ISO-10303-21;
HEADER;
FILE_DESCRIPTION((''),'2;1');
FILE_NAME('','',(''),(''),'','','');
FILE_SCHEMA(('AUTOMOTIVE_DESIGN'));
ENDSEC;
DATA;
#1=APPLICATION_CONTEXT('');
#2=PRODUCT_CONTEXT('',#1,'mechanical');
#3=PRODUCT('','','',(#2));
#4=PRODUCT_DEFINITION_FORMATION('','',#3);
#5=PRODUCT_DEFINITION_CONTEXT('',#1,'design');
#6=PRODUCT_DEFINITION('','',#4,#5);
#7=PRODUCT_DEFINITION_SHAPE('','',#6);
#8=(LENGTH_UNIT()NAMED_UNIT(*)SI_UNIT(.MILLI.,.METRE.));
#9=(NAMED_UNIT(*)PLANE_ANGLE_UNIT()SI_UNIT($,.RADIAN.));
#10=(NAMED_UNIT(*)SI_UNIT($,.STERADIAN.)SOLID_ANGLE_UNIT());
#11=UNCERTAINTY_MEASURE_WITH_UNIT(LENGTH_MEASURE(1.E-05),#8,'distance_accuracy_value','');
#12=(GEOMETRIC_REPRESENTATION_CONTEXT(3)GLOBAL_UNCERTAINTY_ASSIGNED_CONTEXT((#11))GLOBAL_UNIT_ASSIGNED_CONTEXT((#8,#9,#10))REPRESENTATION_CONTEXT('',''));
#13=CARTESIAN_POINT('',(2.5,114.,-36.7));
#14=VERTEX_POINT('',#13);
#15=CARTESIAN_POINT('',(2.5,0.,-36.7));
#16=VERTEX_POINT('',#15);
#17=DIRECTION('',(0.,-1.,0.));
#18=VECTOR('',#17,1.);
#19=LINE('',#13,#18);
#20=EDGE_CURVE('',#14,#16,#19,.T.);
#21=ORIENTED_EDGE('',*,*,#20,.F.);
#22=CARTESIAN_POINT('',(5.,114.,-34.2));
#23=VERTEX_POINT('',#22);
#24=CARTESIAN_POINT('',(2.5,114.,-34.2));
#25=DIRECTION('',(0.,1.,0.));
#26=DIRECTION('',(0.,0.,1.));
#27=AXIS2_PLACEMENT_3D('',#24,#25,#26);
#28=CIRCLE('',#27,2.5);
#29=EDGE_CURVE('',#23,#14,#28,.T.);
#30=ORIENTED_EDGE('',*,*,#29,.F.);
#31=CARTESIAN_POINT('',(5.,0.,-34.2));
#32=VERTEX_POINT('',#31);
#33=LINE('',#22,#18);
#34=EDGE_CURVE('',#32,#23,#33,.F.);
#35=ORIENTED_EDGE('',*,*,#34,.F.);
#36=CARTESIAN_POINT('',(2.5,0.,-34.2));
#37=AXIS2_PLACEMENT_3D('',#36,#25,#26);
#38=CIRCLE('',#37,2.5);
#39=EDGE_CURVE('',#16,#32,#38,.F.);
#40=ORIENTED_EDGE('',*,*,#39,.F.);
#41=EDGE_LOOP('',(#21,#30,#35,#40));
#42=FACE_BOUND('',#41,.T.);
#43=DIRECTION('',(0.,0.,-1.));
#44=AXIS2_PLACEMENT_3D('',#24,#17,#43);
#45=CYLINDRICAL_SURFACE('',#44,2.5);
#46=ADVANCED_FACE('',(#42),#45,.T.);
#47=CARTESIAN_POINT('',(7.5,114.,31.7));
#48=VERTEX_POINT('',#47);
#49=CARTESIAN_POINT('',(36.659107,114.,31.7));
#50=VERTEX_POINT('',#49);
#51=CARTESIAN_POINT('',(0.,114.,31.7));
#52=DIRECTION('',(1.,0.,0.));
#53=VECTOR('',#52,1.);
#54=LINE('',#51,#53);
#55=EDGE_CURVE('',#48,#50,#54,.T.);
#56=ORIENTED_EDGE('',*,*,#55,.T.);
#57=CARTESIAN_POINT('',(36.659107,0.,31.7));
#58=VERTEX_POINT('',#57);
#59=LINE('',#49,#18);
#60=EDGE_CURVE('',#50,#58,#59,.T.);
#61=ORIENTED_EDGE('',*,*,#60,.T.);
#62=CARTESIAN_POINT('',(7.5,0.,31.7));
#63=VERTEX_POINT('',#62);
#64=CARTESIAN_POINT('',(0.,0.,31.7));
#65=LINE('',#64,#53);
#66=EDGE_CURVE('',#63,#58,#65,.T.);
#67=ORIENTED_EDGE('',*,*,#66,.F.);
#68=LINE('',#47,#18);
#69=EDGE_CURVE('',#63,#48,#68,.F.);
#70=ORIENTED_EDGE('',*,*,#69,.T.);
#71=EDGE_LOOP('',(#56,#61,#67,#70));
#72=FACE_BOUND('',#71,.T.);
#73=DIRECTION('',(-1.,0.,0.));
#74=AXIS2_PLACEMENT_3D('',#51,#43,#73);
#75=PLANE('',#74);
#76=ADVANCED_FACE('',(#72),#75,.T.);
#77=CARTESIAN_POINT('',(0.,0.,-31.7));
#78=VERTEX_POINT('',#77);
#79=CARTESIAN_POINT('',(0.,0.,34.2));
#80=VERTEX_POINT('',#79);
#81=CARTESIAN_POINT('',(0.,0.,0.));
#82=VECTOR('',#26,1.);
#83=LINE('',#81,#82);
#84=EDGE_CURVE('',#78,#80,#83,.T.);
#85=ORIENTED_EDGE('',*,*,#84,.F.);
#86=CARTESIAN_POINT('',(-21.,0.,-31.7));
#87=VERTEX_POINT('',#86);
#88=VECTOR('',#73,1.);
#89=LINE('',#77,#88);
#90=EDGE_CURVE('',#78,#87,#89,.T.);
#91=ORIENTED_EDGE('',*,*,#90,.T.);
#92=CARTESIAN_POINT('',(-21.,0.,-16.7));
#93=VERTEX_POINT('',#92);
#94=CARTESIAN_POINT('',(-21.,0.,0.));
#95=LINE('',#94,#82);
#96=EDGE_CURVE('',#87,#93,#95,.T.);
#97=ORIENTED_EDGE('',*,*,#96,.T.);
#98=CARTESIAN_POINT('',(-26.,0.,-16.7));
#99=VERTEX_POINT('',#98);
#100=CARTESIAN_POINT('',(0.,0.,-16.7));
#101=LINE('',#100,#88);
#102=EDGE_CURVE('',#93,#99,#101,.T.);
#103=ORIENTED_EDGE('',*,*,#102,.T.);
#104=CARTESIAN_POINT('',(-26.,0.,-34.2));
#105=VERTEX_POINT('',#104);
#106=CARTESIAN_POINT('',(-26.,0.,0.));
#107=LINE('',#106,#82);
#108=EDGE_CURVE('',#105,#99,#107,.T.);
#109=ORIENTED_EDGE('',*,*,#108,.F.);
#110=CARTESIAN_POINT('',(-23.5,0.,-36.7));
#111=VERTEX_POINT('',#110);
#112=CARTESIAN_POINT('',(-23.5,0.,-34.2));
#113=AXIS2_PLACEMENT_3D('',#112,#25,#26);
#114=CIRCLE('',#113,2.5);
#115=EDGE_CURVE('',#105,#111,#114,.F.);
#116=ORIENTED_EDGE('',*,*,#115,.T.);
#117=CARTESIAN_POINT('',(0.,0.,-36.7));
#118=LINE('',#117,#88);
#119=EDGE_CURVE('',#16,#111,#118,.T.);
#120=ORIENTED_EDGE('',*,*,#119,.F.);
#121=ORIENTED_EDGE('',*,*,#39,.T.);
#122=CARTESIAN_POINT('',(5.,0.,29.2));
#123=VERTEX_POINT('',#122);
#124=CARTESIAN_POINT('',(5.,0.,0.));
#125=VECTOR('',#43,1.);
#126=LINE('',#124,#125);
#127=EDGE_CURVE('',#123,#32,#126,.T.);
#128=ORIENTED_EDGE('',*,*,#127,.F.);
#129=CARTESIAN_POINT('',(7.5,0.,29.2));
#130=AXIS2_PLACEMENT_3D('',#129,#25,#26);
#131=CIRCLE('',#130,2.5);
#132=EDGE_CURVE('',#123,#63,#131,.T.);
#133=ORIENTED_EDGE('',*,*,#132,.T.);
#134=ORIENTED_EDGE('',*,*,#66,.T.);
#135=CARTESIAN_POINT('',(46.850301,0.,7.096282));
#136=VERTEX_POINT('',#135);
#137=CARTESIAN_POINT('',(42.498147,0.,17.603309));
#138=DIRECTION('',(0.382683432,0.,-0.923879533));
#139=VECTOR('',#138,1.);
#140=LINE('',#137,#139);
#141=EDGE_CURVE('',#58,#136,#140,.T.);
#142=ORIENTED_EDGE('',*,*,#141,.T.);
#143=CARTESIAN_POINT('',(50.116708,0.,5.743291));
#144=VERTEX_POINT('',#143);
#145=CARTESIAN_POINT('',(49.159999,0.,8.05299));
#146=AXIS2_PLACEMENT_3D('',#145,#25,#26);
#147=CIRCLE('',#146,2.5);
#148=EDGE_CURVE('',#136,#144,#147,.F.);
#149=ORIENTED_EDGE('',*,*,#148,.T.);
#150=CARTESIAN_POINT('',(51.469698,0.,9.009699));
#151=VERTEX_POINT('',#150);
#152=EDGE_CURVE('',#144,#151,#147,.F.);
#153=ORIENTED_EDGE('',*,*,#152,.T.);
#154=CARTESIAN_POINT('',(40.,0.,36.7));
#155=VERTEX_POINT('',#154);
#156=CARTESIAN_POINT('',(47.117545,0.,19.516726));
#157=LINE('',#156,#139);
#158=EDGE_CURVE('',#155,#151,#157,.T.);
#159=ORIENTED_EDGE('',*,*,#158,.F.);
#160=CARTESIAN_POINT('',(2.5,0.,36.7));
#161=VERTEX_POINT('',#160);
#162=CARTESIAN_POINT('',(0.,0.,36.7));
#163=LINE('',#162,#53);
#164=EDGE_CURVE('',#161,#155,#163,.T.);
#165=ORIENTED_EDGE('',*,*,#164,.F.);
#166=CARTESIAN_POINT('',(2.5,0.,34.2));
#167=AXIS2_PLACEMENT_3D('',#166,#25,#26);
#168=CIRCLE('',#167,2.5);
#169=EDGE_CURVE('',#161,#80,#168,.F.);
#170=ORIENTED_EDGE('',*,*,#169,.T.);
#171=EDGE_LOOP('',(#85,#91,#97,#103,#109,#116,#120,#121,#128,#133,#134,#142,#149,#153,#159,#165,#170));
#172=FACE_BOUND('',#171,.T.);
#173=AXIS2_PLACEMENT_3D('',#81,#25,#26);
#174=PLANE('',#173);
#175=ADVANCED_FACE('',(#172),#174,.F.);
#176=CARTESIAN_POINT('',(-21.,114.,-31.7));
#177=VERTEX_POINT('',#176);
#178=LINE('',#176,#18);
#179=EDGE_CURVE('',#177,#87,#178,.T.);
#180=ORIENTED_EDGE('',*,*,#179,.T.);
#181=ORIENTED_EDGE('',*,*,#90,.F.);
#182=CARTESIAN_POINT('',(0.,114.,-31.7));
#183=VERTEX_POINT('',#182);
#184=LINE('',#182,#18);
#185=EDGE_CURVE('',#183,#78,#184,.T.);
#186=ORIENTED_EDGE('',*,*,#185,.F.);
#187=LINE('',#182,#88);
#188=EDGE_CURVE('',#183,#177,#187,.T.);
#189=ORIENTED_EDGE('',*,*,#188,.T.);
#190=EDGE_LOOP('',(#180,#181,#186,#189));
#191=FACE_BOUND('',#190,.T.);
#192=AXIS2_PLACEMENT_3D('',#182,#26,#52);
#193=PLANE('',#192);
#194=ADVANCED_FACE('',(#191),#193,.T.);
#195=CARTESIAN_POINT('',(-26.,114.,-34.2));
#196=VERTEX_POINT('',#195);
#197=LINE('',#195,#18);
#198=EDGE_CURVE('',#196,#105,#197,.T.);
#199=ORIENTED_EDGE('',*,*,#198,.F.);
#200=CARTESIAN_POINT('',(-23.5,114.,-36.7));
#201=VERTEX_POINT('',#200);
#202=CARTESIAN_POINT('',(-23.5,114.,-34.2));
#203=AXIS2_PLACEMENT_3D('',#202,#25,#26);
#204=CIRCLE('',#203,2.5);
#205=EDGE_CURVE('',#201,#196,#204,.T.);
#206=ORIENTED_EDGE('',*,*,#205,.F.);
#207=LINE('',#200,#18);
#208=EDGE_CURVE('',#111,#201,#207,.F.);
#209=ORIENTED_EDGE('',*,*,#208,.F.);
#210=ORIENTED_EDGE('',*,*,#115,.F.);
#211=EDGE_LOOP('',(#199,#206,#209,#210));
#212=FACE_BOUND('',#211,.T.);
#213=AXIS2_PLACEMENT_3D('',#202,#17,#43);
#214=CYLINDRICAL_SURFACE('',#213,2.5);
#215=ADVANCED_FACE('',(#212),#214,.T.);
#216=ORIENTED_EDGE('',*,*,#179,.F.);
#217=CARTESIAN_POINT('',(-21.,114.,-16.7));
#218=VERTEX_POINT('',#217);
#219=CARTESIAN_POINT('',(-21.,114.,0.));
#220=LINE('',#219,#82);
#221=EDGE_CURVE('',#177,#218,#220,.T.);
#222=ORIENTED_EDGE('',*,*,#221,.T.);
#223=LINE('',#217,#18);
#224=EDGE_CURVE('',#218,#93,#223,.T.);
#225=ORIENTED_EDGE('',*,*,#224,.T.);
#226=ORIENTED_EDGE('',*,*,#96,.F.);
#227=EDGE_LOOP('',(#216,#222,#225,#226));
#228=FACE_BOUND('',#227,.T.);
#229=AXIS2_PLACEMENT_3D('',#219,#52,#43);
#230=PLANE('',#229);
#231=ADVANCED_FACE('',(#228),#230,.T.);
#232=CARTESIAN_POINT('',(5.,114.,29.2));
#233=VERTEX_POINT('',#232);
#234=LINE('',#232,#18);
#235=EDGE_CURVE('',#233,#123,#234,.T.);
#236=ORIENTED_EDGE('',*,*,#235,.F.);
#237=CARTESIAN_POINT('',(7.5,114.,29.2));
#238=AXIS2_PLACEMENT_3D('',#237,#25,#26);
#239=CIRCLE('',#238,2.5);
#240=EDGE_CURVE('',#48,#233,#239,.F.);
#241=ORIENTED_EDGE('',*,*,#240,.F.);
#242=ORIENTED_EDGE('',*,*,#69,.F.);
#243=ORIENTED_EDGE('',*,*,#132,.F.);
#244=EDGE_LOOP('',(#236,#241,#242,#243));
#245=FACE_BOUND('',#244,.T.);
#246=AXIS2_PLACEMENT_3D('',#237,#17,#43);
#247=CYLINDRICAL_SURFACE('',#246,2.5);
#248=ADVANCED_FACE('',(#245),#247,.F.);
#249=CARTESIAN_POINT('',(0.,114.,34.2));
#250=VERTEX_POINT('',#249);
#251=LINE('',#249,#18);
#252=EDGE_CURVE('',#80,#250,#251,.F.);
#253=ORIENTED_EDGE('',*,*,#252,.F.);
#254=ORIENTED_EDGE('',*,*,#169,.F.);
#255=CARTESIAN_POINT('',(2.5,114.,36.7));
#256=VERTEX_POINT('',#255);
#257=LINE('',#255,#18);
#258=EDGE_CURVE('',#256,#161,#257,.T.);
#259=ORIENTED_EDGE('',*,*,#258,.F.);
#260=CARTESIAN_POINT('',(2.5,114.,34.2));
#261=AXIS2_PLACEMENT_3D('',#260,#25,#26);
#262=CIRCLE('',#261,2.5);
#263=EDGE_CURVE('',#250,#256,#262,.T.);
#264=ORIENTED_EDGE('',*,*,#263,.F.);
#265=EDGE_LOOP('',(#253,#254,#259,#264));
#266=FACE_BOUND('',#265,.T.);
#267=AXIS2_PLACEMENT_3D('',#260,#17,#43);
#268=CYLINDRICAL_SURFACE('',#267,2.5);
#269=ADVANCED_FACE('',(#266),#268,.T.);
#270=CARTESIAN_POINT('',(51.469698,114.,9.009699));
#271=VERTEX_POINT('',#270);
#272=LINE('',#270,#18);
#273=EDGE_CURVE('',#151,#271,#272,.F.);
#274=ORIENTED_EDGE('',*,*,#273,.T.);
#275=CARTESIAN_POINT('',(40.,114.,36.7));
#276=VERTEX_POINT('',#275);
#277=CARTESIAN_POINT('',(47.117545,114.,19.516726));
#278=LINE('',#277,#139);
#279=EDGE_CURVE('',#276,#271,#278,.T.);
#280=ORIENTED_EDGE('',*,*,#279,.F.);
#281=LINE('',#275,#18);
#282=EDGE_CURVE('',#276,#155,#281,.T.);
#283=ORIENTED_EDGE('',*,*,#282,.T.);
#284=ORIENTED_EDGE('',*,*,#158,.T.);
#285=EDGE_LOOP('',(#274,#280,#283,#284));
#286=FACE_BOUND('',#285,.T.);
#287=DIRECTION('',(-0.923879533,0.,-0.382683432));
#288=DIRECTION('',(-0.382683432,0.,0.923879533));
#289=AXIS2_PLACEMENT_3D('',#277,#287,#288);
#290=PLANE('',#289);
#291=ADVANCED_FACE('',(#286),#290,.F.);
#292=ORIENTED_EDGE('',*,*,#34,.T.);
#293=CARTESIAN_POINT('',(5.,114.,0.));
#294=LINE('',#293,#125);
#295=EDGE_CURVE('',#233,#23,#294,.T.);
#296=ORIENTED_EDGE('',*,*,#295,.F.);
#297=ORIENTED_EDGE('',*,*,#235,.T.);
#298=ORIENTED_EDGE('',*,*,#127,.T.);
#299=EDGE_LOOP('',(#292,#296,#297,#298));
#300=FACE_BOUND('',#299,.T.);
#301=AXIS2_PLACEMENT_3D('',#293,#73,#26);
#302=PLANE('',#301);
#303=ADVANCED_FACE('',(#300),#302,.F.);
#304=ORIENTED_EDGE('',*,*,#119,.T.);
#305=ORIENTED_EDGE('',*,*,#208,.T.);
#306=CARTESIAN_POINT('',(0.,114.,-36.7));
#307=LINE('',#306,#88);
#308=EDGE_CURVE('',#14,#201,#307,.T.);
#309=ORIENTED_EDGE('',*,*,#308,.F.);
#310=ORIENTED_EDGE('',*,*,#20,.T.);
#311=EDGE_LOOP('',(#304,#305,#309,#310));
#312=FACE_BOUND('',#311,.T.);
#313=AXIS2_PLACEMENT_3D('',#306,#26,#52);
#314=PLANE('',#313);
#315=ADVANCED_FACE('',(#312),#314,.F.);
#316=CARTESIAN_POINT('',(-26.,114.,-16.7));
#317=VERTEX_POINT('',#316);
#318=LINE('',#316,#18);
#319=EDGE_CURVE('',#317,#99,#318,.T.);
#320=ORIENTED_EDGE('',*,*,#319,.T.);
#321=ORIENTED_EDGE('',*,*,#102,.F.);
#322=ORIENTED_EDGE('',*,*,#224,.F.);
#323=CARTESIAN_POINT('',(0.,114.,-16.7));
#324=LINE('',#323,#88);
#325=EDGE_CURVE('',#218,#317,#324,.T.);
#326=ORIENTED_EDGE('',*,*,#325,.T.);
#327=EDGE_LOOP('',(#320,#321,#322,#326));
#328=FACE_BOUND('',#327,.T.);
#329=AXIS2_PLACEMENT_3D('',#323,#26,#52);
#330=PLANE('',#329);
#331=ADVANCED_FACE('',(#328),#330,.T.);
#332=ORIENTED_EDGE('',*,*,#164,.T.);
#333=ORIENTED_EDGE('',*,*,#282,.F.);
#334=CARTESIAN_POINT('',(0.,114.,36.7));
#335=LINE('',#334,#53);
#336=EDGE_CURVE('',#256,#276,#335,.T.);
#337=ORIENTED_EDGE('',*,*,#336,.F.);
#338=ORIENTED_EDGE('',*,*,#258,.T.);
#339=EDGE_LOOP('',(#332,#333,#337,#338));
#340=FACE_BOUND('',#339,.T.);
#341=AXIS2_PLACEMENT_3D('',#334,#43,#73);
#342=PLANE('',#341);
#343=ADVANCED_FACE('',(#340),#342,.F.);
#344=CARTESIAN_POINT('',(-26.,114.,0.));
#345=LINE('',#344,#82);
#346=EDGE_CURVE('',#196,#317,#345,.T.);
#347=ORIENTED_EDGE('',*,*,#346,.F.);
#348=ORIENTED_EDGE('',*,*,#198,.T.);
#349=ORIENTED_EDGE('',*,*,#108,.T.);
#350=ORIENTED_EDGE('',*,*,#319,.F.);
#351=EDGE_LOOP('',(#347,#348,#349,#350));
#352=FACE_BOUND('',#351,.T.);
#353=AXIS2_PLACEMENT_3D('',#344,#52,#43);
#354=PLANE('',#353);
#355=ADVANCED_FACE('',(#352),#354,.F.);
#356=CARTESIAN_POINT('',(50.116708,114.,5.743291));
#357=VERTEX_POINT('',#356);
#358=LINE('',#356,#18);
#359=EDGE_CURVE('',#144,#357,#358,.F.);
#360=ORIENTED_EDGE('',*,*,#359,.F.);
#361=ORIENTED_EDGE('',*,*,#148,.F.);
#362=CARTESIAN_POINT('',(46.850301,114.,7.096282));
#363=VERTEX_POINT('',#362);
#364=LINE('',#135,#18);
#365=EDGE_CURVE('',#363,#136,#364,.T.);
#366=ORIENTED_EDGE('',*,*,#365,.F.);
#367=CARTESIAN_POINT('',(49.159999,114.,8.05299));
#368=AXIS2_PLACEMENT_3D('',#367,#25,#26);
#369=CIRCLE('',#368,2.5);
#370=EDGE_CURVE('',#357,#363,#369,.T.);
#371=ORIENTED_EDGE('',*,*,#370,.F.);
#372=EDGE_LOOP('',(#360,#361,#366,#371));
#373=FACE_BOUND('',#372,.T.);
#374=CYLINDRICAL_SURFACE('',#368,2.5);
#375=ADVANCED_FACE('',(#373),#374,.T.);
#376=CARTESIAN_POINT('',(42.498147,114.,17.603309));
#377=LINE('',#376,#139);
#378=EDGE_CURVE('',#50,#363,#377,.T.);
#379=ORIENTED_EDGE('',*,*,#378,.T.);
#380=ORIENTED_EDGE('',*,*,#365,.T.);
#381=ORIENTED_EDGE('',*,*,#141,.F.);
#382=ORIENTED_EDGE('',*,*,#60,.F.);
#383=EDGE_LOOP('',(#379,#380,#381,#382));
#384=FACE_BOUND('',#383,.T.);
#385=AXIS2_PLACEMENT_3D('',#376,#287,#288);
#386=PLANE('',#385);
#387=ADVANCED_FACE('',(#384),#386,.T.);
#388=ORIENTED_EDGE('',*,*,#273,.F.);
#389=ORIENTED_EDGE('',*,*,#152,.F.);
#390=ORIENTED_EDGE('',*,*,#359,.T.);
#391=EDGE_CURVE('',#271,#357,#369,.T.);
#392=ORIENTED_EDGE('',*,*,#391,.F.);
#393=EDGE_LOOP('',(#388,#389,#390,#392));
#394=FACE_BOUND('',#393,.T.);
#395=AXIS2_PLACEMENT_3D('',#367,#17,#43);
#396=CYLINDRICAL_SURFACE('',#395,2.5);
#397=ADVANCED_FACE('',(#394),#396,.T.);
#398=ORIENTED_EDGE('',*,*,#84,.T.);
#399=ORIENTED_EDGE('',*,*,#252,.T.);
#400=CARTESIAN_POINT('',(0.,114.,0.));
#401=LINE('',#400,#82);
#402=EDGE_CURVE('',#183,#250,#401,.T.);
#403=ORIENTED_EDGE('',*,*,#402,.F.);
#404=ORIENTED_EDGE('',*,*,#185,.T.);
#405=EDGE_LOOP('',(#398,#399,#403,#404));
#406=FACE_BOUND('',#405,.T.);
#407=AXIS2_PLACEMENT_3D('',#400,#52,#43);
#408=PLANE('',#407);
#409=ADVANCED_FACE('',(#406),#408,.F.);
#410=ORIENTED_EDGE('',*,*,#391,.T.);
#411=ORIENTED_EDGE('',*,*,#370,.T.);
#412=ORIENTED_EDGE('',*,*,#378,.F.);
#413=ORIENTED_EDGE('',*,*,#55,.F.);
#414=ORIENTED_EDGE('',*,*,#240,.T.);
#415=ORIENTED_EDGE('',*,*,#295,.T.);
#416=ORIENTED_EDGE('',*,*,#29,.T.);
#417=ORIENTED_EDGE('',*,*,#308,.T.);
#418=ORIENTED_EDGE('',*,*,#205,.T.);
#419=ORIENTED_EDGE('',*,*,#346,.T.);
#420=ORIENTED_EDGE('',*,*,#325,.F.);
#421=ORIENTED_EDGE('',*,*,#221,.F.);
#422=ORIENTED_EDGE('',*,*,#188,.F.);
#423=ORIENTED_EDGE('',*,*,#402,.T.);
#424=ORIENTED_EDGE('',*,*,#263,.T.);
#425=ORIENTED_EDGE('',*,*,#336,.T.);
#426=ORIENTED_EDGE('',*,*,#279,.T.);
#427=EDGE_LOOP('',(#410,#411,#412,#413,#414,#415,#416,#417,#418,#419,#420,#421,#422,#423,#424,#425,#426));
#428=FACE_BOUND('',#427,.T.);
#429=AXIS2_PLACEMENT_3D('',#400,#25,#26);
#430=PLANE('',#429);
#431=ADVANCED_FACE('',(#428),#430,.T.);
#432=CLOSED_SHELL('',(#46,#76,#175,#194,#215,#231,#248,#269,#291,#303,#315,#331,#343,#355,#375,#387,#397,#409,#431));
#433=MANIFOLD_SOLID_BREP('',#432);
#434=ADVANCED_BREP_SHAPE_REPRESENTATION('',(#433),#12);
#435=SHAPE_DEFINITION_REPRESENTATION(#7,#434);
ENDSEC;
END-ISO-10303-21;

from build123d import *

# Parameters (mm, degrees)
EXTRUDE_1_DEPTH = 114
FILLET_5_R      = 2.5
FILLET_6_R      = 2.5
FILLET_8_R      = 2.5
FILLET_10_R     = 2.5
FILLET_11_R     = 2.5


with BuildPart() as part:
    # ｽｹｯﾁ1 → ﾎﾞｽ - 押し出し1 (new body)
    with BuildSketch(Plane(origin=(0, 0, 0), x_dir=(1, 0, 0), z_dir=(0, 1, 0))):
        Polygon((47.807009209, -4.786582838), (36.65910681, -31.7), (5, -31.7), (5, 36.7), (-26, 36.7), (-26, 16.7), (-21, 16.7), (-21, 31.7), (0, 31.7), (0, -36.7), (40, -36.7), (52.426406871, -6.7), align=None)
    extrude(amount=EXTRUDE_1_DEPTH)

    # ﾌｨﾚｯﾄ5
    fillet_5_edges = [part.edges().sort_by_distance(p)[0] for p in [
        (-26, 57, -36.7),
    ]]
    fillet(fillet_5_edges, radius=FILLET_5_R)

    # ﾌｨﾚｯﾄ6
    fillet_6_edges = [part.edges().sort_by_distance(p)[0] for p in [
        (5, 57, -36.7),
    ]]
    fillet(fillet_6_edges, radius=FILLET_6_R)

    # ﾌｨﾚｯﾄ8
    fillet_8_edges = [part.edges().sort_by_distance(p)[0] for p in [
        (52.426406871, 57, 6.7),
        (47.807009209, 57, 4.786582838),
    ]]
    fillet(fillet_8_edges, radius=FILLET_8_R - 0.0001)  # a hair under: the kernel refuses the full size

    # ﾌｨﾚｯﾄ10
    fillet_10_edges = [part.edges().sort_by_distance(p)[0] for p in [
        (0, 57, 36.7),
    ]]
    fillet(fillet_10_edges, radius=FILLET_10_R)

    # ﾌｨﾚｯﾄ11
    fillet_11_edges = [part.edges().sort_by_distance(p)[0] for p in [
        (5, 57, 31.7),
    ]]
    fillet(fillet_11_edges, radius=FILLET_11_R)


solid = part.part
